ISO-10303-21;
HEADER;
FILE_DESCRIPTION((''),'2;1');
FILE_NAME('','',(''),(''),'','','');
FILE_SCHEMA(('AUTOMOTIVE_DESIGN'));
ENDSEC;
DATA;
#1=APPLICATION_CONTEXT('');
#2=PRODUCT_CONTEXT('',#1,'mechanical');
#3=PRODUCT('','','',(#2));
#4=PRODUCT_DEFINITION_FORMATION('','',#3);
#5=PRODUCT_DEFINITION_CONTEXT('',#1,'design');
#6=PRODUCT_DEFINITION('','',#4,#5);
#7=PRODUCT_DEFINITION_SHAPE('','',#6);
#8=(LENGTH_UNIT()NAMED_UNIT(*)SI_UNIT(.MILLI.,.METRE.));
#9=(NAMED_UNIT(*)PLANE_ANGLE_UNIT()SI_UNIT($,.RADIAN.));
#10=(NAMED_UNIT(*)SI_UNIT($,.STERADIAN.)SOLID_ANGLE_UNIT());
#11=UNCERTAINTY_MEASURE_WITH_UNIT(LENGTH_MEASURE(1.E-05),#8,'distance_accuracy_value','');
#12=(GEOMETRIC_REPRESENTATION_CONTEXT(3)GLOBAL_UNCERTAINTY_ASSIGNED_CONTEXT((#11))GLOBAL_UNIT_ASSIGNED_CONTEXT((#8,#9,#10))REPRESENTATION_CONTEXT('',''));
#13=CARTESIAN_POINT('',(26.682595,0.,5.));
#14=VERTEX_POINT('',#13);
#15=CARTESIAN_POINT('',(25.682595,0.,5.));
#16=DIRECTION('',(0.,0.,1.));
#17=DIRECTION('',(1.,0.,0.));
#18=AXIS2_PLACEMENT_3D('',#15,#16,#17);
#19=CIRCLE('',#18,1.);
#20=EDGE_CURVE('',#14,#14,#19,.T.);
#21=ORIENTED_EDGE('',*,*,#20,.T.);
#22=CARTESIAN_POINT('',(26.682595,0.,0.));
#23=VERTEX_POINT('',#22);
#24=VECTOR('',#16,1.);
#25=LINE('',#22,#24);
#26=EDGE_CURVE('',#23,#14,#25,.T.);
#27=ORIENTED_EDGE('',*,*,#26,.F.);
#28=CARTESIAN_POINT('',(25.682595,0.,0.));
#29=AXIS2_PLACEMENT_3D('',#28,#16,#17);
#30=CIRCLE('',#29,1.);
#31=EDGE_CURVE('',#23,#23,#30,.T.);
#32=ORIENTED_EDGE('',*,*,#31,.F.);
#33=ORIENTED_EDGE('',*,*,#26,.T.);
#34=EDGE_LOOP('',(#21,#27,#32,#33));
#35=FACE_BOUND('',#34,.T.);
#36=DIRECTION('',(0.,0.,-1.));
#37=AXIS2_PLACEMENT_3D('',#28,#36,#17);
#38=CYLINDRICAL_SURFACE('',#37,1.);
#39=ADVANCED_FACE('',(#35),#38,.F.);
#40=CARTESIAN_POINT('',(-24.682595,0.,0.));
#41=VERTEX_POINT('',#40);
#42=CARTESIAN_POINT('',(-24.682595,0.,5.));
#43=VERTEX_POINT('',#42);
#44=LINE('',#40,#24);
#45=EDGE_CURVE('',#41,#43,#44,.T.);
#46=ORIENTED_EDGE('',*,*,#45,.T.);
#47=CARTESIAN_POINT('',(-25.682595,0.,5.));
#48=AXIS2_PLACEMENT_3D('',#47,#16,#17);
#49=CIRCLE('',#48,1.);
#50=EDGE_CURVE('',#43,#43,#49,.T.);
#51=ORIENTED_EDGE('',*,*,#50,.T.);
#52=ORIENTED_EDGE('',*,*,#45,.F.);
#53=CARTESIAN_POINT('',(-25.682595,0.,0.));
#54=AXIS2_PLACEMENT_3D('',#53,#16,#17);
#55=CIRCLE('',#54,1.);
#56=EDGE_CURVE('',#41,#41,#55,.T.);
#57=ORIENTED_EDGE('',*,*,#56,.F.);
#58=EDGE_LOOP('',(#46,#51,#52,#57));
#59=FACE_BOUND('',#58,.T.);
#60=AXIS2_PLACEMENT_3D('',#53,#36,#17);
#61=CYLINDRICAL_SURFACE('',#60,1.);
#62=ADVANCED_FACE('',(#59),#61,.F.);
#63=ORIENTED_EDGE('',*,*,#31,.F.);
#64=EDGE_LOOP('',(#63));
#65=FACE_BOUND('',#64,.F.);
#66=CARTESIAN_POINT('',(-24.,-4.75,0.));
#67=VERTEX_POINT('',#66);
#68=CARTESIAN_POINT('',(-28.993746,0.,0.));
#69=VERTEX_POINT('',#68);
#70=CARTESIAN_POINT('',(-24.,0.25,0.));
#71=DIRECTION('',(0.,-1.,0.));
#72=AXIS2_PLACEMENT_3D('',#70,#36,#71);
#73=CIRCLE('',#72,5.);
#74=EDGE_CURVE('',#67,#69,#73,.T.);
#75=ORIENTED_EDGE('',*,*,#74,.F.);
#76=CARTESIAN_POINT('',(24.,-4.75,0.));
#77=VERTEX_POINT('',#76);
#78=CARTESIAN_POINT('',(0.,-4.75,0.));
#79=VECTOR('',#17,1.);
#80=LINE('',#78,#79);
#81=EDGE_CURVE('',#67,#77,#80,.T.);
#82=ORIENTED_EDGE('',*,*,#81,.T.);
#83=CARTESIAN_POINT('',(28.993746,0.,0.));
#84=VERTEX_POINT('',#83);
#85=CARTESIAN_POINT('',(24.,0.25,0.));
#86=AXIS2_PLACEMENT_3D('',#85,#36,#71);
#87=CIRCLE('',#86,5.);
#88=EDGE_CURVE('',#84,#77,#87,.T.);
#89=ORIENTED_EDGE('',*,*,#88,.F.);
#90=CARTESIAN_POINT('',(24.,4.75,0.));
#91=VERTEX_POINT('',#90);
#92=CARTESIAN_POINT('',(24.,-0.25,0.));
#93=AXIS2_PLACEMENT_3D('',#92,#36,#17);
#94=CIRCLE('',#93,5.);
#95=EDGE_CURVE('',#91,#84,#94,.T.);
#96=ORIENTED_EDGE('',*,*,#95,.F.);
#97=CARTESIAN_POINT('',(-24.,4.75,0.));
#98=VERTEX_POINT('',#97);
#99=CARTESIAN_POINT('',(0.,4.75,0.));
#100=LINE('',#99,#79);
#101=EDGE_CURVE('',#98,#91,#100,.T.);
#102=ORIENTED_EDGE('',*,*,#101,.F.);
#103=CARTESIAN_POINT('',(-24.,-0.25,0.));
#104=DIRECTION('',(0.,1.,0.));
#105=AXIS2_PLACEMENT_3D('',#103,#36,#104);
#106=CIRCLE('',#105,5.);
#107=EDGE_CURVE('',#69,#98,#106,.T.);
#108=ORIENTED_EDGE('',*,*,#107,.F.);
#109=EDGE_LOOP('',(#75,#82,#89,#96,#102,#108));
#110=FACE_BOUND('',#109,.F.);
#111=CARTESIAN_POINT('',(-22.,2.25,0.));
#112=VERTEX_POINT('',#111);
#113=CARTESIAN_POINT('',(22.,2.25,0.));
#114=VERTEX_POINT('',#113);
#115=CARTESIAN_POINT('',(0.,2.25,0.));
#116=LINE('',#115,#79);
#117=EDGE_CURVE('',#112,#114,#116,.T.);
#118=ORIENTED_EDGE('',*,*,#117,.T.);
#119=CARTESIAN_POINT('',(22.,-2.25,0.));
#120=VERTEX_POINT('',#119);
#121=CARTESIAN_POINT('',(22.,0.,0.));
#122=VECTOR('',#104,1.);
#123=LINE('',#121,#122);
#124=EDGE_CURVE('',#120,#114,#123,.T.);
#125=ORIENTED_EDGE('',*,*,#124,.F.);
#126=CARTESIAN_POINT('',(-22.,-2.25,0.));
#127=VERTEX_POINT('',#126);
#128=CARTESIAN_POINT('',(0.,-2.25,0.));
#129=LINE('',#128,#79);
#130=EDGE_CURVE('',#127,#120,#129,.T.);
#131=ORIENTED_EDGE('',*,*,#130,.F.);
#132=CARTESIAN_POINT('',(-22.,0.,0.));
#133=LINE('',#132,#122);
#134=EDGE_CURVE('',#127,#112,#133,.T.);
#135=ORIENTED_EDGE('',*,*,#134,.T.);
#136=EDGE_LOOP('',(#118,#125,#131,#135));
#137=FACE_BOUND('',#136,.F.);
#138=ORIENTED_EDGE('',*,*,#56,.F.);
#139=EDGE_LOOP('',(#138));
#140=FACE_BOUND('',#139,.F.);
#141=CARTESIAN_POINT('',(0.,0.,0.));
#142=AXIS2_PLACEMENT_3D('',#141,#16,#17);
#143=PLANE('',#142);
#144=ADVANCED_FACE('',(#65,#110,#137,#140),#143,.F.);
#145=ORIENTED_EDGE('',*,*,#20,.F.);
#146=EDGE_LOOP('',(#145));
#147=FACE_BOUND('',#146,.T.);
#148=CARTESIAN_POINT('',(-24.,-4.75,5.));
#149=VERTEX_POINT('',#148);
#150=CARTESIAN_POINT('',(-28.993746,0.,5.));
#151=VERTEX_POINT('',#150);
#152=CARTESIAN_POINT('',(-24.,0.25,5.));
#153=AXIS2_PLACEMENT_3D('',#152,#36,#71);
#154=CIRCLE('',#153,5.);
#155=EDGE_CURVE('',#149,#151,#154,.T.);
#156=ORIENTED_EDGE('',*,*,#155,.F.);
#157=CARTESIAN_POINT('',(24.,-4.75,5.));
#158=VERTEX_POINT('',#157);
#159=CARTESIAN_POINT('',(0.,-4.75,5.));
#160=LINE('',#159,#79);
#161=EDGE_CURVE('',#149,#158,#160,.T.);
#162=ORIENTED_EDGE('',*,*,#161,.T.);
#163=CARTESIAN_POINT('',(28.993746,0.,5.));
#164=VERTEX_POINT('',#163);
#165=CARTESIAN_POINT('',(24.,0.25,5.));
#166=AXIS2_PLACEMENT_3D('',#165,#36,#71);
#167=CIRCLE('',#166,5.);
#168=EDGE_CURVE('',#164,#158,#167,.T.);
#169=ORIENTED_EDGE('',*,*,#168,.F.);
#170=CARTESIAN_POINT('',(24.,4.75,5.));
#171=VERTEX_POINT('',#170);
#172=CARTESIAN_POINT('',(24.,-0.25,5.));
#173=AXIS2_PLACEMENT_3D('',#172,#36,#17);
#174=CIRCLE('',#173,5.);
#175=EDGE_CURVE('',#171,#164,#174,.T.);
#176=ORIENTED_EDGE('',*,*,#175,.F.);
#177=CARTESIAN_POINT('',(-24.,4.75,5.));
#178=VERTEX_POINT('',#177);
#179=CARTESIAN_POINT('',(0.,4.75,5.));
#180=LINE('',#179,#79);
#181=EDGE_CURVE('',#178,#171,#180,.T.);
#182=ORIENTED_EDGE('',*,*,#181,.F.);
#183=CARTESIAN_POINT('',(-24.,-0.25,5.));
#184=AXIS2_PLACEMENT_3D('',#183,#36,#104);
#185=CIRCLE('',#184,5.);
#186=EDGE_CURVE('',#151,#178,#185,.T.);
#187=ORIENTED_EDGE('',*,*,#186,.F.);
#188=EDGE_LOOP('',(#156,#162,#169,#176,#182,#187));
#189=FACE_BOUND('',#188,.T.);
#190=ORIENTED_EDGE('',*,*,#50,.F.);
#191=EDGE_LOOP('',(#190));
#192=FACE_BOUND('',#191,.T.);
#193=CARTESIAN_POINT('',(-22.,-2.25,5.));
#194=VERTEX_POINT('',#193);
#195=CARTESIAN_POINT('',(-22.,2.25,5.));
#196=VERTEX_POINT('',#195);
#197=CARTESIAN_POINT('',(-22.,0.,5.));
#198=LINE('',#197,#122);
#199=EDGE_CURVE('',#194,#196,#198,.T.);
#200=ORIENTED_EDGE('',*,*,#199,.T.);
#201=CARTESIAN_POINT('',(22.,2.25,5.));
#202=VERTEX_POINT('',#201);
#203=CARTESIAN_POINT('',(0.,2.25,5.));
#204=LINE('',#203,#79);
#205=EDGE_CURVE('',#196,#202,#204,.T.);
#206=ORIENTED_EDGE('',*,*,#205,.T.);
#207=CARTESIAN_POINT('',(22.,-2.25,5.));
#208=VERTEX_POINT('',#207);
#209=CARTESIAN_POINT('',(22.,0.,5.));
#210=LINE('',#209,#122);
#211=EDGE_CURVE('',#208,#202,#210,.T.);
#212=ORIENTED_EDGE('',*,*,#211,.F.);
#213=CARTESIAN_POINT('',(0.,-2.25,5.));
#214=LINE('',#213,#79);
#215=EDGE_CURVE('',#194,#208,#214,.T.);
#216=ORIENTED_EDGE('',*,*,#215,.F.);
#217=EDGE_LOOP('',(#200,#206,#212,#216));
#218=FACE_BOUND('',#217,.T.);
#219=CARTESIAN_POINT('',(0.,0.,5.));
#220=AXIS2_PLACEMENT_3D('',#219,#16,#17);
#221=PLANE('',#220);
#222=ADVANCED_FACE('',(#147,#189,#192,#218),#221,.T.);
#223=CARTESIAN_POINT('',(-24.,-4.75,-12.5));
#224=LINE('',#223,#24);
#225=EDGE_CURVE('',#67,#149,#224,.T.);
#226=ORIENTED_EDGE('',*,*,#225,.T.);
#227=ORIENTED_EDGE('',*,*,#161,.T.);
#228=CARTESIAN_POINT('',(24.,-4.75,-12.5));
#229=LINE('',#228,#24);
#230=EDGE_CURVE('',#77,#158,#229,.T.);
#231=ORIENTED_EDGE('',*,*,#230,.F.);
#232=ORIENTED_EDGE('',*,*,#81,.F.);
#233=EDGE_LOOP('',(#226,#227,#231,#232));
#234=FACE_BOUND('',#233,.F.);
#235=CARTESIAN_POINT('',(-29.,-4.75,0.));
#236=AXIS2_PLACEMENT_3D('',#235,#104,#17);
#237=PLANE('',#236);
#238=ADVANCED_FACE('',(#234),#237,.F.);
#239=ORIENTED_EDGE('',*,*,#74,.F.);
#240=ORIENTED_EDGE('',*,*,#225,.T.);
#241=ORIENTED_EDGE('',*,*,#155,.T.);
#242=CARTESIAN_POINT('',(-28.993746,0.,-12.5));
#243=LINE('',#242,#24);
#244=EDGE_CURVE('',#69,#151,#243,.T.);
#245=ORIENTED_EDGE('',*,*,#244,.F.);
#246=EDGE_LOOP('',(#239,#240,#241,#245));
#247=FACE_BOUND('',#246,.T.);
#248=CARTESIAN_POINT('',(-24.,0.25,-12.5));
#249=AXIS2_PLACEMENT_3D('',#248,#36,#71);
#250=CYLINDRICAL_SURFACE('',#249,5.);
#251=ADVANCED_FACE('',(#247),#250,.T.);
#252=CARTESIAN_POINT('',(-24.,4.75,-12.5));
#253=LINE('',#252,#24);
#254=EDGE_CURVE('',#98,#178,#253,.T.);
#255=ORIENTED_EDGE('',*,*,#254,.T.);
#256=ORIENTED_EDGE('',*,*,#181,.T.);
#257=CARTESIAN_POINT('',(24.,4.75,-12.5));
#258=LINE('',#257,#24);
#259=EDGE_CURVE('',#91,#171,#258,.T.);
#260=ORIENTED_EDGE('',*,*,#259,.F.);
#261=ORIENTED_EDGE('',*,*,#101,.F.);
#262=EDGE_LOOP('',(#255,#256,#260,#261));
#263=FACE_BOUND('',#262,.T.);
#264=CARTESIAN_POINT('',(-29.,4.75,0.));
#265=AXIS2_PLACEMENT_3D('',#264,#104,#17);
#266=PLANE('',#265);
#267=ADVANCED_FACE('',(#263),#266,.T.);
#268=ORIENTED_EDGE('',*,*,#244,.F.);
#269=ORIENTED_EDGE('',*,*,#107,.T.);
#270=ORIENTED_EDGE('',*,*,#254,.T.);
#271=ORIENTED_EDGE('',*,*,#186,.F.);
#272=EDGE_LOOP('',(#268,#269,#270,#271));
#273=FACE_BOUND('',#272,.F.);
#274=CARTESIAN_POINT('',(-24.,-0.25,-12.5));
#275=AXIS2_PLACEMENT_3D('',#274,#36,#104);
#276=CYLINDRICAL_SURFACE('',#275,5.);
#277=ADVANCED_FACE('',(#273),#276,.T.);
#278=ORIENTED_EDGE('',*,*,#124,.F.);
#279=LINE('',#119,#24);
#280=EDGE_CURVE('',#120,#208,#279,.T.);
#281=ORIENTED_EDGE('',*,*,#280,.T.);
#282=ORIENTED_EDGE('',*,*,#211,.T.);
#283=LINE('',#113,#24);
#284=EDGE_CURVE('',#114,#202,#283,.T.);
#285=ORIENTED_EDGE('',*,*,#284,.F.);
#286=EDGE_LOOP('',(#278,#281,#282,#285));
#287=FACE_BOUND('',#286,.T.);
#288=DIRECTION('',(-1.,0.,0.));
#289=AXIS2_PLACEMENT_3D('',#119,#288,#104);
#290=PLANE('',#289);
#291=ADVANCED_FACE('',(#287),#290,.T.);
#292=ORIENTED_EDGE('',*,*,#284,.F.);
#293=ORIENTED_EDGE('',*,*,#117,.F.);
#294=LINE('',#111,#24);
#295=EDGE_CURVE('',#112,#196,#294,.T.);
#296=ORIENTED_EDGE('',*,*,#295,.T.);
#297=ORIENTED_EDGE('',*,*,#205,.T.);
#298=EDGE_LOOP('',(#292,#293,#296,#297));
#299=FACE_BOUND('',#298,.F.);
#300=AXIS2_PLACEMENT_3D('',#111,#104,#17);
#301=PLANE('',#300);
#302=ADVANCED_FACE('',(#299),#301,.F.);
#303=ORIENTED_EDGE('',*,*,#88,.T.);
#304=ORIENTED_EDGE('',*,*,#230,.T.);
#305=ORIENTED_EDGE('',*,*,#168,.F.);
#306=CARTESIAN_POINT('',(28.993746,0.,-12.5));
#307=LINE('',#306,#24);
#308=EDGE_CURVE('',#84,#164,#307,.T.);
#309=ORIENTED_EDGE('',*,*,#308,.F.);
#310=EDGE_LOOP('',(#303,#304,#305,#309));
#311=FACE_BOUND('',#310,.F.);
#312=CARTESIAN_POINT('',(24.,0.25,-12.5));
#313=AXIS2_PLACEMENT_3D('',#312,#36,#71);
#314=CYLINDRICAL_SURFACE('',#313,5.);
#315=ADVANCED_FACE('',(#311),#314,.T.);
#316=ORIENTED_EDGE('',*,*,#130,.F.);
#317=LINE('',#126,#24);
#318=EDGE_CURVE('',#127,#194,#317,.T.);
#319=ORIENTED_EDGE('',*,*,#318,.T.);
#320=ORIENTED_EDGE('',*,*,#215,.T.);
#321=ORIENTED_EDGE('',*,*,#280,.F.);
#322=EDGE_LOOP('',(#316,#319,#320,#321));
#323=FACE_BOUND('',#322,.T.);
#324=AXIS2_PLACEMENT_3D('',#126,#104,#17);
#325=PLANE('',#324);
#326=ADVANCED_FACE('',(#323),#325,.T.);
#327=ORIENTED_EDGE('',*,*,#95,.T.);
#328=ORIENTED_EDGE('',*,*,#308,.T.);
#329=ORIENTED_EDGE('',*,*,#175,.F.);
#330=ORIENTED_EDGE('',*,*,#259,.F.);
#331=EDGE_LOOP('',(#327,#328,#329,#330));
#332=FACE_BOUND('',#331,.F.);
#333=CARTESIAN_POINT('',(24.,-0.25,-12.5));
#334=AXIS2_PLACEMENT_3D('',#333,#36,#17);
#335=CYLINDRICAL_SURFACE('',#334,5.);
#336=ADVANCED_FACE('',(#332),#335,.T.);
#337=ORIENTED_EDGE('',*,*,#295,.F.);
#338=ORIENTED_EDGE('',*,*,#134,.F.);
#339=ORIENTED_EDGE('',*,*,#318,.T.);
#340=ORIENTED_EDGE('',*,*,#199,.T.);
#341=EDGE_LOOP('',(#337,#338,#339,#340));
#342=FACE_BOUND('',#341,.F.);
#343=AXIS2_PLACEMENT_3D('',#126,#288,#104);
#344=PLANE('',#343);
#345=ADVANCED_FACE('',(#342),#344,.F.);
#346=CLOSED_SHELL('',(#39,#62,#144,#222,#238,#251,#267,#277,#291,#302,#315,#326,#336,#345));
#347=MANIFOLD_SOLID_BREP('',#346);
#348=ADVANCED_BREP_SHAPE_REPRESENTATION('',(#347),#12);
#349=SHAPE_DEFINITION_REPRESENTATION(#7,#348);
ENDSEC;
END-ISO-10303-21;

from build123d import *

# Parameters (mm, degrees)
F0_W        = 58
F0_H        = 9.5
F0_R        = 1
F0_W_2      = 44
F0_H_2      = 4.5
F1_DEPTH    = 5
F2_T1_DEPTH = 30


# Not quite as in the source:
# - a fillet or chamfer that OpenCascade refuses, or shapes differently, is made with other operations: its cross-section is extruded or revolved along the edge and cut away or added


with BuildPart() as f1:
    # F0 (on Top) → F1 (new body)
    with BuildSketch(Plane.XY):
        Rectangle(F0_W, F0_H)
        with Locations((-25.6825946271, 0)):
            Circle(F0_R, mode=Mode.SUBTRACT)
        Rectangle(F0_W_2, F0_H_2, mode=Mode.SUBTRACT)
        with Locations((25.6825946271, 0)):
            Circle(F0_R, mode=Mode.SUBTRACT)
    extrude(amount=F1_DEPTH)

    # F2: fillet of radius 5 on 4 edges, made by hand

    # F2_s2 → F2_t1 (cut)
    with BuildSketch(Plane.XY.offset(-12.5)):
        with BuildLine():
            ThreePointArc((24, -4.75), (27.5355339059, -3.2855339059), (29, 0.25))
            Line((29, 0.25), (29, -4.75))
            Line((29, -4.75), (24, -4.75))
        make_face()
        with BuildLine():
            ThreePointArc((29, -0.25), (27.5355339059, 3.2855339059), (24, 4.75))
            Line((24, 4.75), (29, 4.75))
            Line((29, 4.75), (29, -0.25))
        make_face()
        with BuildLine():
            ThreePointArc((-24, 4.75), (-27.5355339059, 3.2855339059), (-29, -0.25))
            Line((-29, -0.25), (-29, 4.75))
            Line((-29, 4.75), (-24, 4.75))
        make_face()
        with BuildLine():
            ThreePointArc((-24, -4.75), (-27.5355339059, -3.2855339059), (-29, 0.25))
            Line((-29, 0.25), (-29, -4.75))
            Line((-29, -4.75), (-24, -4.75))
        make_face()
    extrude(amount=F2_T1_DEPTH, mode=Mode.SUBTRACT)


solid = f1.part
